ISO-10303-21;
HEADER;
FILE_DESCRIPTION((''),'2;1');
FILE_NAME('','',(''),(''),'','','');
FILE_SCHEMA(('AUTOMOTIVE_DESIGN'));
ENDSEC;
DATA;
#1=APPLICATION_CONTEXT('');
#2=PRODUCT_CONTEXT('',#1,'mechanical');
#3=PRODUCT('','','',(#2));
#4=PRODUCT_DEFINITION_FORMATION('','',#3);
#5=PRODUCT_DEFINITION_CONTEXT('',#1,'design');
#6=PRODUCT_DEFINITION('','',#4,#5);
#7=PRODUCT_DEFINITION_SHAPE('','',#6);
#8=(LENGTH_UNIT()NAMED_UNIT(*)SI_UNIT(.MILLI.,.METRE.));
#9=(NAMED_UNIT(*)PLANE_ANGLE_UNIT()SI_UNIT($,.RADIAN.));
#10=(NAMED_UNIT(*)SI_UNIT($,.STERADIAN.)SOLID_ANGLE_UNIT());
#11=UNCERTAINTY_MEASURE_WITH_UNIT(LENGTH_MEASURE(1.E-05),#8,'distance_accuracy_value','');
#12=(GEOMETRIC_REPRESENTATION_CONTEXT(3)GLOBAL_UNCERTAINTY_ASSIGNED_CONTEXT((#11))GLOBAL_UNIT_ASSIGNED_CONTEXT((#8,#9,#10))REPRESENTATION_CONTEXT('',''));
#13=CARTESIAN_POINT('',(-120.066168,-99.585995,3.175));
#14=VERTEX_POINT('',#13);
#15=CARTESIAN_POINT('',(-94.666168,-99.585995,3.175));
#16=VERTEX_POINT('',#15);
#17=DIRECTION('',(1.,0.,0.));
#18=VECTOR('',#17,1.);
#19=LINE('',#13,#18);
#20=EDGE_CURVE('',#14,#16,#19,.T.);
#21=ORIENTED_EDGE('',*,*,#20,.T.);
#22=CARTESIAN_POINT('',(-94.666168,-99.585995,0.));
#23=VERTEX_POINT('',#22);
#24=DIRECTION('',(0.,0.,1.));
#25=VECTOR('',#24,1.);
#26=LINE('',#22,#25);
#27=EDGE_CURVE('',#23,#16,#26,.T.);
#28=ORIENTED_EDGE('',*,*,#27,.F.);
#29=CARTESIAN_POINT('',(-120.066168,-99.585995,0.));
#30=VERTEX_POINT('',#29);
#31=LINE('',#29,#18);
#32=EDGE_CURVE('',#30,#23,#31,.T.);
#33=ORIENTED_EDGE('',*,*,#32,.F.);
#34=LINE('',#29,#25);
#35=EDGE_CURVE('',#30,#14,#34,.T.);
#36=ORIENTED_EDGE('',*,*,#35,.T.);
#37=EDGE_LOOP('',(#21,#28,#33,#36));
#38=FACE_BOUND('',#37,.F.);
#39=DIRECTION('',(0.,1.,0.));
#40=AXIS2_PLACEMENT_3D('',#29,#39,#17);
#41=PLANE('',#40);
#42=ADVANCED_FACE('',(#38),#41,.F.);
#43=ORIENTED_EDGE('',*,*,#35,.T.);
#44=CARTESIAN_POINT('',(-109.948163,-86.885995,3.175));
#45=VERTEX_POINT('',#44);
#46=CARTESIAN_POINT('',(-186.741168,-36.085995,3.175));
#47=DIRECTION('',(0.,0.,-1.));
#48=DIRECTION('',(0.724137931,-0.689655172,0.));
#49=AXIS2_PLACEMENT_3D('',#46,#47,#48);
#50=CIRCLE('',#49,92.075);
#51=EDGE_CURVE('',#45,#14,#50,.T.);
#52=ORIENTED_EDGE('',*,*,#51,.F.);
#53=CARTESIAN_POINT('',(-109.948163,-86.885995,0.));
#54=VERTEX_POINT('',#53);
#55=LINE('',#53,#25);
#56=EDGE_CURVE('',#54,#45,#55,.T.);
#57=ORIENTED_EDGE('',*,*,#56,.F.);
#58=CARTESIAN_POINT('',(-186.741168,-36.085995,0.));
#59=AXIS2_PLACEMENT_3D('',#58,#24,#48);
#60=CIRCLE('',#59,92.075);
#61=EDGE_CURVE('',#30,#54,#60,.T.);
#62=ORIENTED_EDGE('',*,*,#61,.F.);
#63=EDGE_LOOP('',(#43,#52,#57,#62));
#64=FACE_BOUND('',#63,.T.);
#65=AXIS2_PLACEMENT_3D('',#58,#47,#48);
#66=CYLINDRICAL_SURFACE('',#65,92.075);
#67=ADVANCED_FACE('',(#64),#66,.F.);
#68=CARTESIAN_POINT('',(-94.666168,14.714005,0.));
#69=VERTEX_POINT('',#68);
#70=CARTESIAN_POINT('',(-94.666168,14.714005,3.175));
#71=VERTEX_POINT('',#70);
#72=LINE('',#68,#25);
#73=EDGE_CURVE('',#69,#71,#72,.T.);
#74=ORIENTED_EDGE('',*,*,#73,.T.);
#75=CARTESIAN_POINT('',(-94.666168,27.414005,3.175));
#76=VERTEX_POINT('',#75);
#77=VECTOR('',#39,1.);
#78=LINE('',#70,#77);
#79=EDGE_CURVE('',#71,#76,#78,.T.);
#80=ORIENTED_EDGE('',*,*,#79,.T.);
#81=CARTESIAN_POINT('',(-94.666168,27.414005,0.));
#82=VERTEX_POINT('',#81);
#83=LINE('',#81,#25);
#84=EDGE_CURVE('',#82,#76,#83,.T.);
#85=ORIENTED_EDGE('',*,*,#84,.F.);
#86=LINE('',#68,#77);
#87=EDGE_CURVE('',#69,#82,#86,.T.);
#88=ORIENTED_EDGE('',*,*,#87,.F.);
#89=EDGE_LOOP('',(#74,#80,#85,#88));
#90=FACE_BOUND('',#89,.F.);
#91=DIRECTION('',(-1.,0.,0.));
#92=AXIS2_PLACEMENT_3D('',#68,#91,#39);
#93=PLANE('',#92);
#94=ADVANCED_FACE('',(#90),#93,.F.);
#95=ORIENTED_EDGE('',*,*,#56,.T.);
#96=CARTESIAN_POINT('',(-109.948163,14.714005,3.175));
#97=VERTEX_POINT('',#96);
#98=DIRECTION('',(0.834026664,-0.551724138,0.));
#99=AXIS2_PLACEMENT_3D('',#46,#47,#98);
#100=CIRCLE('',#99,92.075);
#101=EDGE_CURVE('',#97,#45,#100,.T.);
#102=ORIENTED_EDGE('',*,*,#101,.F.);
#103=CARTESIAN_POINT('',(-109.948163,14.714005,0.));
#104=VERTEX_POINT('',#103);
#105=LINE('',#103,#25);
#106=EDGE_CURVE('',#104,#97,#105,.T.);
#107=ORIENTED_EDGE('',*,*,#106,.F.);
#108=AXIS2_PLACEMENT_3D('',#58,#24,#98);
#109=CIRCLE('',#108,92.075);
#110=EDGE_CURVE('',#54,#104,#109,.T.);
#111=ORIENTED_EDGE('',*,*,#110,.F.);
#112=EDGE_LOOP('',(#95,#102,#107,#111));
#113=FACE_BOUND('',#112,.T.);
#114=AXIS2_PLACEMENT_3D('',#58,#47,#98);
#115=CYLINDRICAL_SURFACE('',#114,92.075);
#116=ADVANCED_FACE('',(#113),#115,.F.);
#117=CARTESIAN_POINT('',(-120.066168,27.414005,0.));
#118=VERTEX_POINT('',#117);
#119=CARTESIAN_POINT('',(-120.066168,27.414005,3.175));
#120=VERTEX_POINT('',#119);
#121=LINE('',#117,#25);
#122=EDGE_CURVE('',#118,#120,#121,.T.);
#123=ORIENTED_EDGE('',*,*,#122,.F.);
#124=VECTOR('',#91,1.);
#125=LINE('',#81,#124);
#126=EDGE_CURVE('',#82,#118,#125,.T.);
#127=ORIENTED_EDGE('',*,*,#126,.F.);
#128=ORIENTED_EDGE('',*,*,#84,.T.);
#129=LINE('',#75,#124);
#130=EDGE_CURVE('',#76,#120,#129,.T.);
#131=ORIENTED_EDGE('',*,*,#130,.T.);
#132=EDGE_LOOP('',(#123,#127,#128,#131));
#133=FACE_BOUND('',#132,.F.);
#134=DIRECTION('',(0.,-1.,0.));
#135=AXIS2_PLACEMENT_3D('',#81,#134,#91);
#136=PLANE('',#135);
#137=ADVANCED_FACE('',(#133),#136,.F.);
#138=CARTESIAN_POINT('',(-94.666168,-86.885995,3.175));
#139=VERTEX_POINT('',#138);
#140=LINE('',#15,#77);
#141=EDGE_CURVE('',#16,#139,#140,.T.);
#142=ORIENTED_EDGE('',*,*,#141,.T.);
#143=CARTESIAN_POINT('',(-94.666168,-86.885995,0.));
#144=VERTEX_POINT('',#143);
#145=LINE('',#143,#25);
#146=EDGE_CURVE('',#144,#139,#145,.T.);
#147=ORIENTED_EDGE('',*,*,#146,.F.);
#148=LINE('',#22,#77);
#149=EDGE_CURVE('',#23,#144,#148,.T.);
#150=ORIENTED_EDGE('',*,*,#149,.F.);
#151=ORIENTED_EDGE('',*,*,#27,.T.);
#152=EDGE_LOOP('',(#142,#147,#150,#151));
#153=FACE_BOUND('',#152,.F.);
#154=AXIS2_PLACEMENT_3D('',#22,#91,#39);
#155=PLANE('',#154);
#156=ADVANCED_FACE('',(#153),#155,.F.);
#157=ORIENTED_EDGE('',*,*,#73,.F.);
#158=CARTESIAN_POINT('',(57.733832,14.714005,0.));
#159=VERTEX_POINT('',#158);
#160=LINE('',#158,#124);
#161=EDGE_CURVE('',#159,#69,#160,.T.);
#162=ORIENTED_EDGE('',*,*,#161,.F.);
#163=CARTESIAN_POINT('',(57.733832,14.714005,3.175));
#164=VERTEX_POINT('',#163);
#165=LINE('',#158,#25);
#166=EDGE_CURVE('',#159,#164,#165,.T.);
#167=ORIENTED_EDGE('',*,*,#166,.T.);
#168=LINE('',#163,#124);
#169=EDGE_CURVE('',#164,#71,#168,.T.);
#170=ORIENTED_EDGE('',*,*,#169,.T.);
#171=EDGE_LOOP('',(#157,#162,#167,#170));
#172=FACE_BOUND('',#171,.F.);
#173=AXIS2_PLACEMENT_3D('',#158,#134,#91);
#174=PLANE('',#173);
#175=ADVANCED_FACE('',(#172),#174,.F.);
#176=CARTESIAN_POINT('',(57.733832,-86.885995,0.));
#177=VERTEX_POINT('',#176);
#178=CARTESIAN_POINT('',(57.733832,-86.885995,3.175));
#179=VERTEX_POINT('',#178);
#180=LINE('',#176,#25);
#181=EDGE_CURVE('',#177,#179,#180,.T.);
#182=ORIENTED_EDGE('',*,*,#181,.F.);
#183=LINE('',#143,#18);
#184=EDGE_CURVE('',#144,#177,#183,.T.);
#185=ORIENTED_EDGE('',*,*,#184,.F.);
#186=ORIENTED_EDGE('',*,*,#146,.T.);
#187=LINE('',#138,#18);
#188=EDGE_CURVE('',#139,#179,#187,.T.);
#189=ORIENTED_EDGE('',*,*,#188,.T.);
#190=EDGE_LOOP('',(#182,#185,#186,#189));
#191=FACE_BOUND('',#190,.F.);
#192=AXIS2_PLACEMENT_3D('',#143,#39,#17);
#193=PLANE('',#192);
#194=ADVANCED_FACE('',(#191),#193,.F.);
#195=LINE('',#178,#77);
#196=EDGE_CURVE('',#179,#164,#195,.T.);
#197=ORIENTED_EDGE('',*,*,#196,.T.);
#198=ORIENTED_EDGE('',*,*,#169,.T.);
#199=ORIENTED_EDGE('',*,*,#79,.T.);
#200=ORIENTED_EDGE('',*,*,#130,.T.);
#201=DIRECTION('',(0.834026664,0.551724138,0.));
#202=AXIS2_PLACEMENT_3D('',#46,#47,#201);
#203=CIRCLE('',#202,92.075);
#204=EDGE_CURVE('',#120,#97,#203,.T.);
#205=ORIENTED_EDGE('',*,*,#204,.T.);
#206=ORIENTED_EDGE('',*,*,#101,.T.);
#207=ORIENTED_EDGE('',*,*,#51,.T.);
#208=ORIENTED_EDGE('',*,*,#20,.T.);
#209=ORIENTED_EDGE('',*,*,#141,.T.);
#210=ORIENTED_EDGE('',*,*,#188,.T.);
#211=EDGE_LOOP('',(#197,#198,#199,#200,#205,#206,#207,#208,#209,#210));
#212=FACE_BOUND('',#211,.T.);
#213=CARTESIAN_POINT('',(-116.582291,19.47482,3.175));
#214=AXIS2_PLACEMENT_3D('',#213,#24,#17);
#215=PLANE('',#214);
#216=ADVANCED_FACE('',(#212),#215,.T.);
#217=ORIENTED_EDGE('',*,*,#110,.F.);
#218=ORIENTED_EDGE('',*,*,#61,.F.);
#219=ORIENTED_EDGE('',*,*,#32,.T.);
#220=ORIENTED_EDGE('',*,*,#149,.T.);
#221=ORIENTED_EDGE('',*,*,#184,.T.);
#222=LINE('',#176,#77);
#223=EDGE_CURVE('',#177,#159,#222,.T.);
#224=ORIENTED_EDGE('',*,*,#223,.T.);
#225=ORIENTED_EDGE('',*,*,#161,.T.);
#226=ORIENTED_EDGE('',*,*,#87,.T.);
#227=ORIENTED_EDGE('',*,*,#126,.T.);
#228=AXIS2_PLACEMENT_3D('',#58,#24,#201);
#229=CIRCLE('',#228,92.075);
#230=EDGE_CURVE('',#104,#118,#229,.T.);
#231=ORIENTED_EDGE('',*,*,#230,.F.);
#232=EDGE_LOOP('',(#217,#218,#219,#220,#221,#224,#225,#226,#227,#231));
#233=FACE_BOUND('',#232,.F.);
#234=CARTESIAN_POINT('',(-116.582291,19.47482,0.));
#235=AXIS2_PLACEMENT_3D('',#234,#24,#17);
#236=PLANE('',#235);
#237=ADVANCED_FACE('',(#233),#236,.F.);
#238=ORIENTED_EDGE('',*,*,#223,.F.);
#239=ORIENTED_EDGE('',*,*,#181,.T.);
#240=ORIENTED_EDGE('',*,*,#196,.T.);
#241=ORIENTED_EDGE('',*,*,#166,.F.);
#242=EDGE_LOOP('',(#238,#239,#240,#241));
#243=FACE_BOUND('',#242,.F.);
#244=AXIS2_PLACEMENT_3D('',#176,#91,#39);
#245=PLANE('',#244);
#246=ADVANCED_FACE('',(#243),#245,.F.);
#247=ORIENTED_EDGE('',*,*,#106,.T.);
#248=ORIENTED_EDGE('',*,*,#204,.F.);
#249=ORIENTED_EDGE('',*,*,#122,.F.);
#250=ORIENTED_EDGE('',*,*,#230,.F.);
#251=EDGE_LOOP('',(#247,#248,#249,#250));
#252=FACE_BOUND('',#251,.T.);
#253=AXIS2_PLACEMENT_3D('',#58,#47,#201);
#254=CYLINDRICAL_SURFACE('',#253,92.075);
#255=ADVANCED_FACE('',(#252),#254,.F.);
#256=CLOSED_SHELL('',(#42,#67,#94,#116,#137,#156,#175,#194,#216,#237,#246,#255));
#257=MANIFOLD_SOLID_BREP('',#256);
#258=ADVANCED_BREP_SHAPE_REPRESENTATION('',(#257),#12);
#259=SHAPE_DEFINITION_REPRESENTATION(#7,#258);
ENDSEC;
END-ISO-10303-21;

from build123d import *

# Parameters (mm, degrees)
F0_W     = 25.4
F0_H     = 3.175
F1_DEPTH = 3.175
F6_DEPTH = 3.176


# Not quite as in the source:
# - the program builds the solid bodies; features that only make, move or delete a surface that nothing else refers to are left out


with BuildPart() as f1:
    # F0 (on Top) → F1 (new body)
    with BuildSketch(Plane.XY):
        with BuildLine():
            Line((-120.0661680937, 14.7140049219), (-109.9481630411, 14.7140049219))
            ThreePointArc((-109.9481630411, 14.7140049219), (-114.7266583166, 21.2874831724), (-120.0661680937, 27.4140049219))
            Line((-120.0661680937, 27.4140049219), (-120.0661680937, 14.7140049219))
        make_face()
        with BuildLine():
            ThreePointArc((-109.9481630411, -86.8859950781), (-94.6661680937, -36.0859950781), (-109.9481630411, 14.7140049219))
            Line((-109.9481630411, 14.7140049219), (-120.0661680937, 14.7140049219))
            Line((-120.0661680937, 14.7140049219), (-120.0661680937, -86.8859950781))
            Line((-120.0661680937, -86.8859950781), (-109.9481630411, -86.8859950781))
        make_face()
        with Locations((32.3338319063, 13.1265049219)):
            Rectangle(F0_W, F0_H)
        with BuildLine():
            Line((-94.6661680937, -86.8859950781), (-109.9481630411, -86.8859950781))
            ThreePointArc((-109.9481630411, -86.8859950781), (-114.7266583166, -93.4594733286), (-120.0661680937, -99.5859950781))
            Line((-120.0661680937, -99.5859950781), (-94.6661680937, -99.5859950781))
            Line((-94.6661680937, -99.5859950781), (-94.6661680937, -86.8859950781))
        make_face()
        with BuildLine():
            Line((-89.0957787633, 14.7140049219), (-94.6661680937, 14.7140049219))
            Line((-94.6661680937, 14.7140049219), (-109.9481630411, 14.7140049219))
            ThreePointArc((-109.9481630411, 14.7140049219), (-94.6661680937, -36.0859950781), (-109.9481630411, -86.8859950781))
            Line((-109.9481630411, -86.8859950781), (-94.6661680937, -86.8859950781))
            Line((-94.6661680937, -86.8859950781), (19.6338319063, -86.8859950781))
            Line((19.6338319063, -86.8859950781), (19.6338319063, -83.7109950781))
            Line((19.6338319063, -83.7109950781), (45.0338319063, -83.7109950781))
            Line((45.0338319063, -83.7109950781), (45.0338319063, -86.8859950781))
            Line((45.0338319063, -86.8859950781), (57.7338319063, -86.8859950781))
            Line((57.7338319063, -86.8859950781), (57.7338319063, 14.7140049219))
            Line((57.7338319063, 14.7140049219), (45.0338319063, 14.7140049219))
            Line((45.0338319063, 14.7140049219), (45.0338319063, 11.5390049219))
            Line((45.0338319063, 11.5390049219), (19.6338319063, 11.5390049219))
            Line((19.6338319063, 11.5390049219), (19.6338319063, 14.7140049219))
            Line((19.6338319063, 14.7140049219), (-89.0957787633, 14.7140049219))
        make_face()
        with Locations((32.3338319063, -85.2984950781)):
            Rectangle(F0_W, F0_H)
        with BuildLine():
            ThreePointArc((-120.0661680937, -99.5859950781), (-114.7266583166, -93.4594733286), (-109.9481630411, -86.8859950781))
            Line((-109.9481630411, -86.8859950781), (-120.0661680937, -86.8859950781))
            Line((-120.0661680937, -86.8859950781), (-120.0661680937, -99.5859950781))
        make_face()
        with BuildLine():
            Line((-109.9481630411, 14.7140049219), (-94.6661680937, 14.7140049219))
            Line((-94.6661680937, 14.7140049219), (-94.6661680937, 27.4140049219))
            Line((-94.6661680937, 27.4140049219), (-120.0661680937, 27.4140049219))
            ThreePointArc((-120.0661680937, 27.4140049219), (-114.7266583166, 21.2874831724), (-109.9481630411, 14.7140049219))
        make_face()
    extrude(amount=F1_DEPTH)

    # F0 (on Top) → F6 (cut, through all)
    with BuildSketch(Plane.XY):
        with BuildLine():
            ThreePointArc((-109.9481630411, -86.8859950781), (-94.6661680937, -36.0859950781), (-109.9481630411, 14.7140049219))
            Line((-109.9481630411, 14.7140049219), (-120.0661680937, 14.7140049219))
            Line((-120.0661680937, 14.7140049219), (-120.0661680937, -86.8859950781))
            Line((-120.0661680937, -86.8859950781), (-109.9481630411, -86.8859950781))
        make_face()
        with BuildLine():
            Line((-120.0661680937, 14.7140049219), (-109.9481630411, 14.7140049219))
            ThreePointArc((-109.9481630411, 14.7140049219), (-114.7266583166, 21.2874831724), (-120.0661680937, 27.4140049219))
            Line((-120.0661680937, 27.4140049219), (-120.0661680937, 14.7140049219))
        make_face()
        with BuildLine():
            ThreePointArc((-120.0661680937, -99.5859950781), (-114.7266583166, -93.4594733286), (-109.9481630411, -86.8859950781))
            Line((-109.9481630411, -86.8859950781), (-120.0661680937, -86.8859950781))
            Line((-120.0661680937, -86.8859950781), (-120.0661680937, -99.5859950781))
        make_face()
    extrude(amount=F6_DEPTH, mode=Mode.SUBTRACT)


solid = f1.part
